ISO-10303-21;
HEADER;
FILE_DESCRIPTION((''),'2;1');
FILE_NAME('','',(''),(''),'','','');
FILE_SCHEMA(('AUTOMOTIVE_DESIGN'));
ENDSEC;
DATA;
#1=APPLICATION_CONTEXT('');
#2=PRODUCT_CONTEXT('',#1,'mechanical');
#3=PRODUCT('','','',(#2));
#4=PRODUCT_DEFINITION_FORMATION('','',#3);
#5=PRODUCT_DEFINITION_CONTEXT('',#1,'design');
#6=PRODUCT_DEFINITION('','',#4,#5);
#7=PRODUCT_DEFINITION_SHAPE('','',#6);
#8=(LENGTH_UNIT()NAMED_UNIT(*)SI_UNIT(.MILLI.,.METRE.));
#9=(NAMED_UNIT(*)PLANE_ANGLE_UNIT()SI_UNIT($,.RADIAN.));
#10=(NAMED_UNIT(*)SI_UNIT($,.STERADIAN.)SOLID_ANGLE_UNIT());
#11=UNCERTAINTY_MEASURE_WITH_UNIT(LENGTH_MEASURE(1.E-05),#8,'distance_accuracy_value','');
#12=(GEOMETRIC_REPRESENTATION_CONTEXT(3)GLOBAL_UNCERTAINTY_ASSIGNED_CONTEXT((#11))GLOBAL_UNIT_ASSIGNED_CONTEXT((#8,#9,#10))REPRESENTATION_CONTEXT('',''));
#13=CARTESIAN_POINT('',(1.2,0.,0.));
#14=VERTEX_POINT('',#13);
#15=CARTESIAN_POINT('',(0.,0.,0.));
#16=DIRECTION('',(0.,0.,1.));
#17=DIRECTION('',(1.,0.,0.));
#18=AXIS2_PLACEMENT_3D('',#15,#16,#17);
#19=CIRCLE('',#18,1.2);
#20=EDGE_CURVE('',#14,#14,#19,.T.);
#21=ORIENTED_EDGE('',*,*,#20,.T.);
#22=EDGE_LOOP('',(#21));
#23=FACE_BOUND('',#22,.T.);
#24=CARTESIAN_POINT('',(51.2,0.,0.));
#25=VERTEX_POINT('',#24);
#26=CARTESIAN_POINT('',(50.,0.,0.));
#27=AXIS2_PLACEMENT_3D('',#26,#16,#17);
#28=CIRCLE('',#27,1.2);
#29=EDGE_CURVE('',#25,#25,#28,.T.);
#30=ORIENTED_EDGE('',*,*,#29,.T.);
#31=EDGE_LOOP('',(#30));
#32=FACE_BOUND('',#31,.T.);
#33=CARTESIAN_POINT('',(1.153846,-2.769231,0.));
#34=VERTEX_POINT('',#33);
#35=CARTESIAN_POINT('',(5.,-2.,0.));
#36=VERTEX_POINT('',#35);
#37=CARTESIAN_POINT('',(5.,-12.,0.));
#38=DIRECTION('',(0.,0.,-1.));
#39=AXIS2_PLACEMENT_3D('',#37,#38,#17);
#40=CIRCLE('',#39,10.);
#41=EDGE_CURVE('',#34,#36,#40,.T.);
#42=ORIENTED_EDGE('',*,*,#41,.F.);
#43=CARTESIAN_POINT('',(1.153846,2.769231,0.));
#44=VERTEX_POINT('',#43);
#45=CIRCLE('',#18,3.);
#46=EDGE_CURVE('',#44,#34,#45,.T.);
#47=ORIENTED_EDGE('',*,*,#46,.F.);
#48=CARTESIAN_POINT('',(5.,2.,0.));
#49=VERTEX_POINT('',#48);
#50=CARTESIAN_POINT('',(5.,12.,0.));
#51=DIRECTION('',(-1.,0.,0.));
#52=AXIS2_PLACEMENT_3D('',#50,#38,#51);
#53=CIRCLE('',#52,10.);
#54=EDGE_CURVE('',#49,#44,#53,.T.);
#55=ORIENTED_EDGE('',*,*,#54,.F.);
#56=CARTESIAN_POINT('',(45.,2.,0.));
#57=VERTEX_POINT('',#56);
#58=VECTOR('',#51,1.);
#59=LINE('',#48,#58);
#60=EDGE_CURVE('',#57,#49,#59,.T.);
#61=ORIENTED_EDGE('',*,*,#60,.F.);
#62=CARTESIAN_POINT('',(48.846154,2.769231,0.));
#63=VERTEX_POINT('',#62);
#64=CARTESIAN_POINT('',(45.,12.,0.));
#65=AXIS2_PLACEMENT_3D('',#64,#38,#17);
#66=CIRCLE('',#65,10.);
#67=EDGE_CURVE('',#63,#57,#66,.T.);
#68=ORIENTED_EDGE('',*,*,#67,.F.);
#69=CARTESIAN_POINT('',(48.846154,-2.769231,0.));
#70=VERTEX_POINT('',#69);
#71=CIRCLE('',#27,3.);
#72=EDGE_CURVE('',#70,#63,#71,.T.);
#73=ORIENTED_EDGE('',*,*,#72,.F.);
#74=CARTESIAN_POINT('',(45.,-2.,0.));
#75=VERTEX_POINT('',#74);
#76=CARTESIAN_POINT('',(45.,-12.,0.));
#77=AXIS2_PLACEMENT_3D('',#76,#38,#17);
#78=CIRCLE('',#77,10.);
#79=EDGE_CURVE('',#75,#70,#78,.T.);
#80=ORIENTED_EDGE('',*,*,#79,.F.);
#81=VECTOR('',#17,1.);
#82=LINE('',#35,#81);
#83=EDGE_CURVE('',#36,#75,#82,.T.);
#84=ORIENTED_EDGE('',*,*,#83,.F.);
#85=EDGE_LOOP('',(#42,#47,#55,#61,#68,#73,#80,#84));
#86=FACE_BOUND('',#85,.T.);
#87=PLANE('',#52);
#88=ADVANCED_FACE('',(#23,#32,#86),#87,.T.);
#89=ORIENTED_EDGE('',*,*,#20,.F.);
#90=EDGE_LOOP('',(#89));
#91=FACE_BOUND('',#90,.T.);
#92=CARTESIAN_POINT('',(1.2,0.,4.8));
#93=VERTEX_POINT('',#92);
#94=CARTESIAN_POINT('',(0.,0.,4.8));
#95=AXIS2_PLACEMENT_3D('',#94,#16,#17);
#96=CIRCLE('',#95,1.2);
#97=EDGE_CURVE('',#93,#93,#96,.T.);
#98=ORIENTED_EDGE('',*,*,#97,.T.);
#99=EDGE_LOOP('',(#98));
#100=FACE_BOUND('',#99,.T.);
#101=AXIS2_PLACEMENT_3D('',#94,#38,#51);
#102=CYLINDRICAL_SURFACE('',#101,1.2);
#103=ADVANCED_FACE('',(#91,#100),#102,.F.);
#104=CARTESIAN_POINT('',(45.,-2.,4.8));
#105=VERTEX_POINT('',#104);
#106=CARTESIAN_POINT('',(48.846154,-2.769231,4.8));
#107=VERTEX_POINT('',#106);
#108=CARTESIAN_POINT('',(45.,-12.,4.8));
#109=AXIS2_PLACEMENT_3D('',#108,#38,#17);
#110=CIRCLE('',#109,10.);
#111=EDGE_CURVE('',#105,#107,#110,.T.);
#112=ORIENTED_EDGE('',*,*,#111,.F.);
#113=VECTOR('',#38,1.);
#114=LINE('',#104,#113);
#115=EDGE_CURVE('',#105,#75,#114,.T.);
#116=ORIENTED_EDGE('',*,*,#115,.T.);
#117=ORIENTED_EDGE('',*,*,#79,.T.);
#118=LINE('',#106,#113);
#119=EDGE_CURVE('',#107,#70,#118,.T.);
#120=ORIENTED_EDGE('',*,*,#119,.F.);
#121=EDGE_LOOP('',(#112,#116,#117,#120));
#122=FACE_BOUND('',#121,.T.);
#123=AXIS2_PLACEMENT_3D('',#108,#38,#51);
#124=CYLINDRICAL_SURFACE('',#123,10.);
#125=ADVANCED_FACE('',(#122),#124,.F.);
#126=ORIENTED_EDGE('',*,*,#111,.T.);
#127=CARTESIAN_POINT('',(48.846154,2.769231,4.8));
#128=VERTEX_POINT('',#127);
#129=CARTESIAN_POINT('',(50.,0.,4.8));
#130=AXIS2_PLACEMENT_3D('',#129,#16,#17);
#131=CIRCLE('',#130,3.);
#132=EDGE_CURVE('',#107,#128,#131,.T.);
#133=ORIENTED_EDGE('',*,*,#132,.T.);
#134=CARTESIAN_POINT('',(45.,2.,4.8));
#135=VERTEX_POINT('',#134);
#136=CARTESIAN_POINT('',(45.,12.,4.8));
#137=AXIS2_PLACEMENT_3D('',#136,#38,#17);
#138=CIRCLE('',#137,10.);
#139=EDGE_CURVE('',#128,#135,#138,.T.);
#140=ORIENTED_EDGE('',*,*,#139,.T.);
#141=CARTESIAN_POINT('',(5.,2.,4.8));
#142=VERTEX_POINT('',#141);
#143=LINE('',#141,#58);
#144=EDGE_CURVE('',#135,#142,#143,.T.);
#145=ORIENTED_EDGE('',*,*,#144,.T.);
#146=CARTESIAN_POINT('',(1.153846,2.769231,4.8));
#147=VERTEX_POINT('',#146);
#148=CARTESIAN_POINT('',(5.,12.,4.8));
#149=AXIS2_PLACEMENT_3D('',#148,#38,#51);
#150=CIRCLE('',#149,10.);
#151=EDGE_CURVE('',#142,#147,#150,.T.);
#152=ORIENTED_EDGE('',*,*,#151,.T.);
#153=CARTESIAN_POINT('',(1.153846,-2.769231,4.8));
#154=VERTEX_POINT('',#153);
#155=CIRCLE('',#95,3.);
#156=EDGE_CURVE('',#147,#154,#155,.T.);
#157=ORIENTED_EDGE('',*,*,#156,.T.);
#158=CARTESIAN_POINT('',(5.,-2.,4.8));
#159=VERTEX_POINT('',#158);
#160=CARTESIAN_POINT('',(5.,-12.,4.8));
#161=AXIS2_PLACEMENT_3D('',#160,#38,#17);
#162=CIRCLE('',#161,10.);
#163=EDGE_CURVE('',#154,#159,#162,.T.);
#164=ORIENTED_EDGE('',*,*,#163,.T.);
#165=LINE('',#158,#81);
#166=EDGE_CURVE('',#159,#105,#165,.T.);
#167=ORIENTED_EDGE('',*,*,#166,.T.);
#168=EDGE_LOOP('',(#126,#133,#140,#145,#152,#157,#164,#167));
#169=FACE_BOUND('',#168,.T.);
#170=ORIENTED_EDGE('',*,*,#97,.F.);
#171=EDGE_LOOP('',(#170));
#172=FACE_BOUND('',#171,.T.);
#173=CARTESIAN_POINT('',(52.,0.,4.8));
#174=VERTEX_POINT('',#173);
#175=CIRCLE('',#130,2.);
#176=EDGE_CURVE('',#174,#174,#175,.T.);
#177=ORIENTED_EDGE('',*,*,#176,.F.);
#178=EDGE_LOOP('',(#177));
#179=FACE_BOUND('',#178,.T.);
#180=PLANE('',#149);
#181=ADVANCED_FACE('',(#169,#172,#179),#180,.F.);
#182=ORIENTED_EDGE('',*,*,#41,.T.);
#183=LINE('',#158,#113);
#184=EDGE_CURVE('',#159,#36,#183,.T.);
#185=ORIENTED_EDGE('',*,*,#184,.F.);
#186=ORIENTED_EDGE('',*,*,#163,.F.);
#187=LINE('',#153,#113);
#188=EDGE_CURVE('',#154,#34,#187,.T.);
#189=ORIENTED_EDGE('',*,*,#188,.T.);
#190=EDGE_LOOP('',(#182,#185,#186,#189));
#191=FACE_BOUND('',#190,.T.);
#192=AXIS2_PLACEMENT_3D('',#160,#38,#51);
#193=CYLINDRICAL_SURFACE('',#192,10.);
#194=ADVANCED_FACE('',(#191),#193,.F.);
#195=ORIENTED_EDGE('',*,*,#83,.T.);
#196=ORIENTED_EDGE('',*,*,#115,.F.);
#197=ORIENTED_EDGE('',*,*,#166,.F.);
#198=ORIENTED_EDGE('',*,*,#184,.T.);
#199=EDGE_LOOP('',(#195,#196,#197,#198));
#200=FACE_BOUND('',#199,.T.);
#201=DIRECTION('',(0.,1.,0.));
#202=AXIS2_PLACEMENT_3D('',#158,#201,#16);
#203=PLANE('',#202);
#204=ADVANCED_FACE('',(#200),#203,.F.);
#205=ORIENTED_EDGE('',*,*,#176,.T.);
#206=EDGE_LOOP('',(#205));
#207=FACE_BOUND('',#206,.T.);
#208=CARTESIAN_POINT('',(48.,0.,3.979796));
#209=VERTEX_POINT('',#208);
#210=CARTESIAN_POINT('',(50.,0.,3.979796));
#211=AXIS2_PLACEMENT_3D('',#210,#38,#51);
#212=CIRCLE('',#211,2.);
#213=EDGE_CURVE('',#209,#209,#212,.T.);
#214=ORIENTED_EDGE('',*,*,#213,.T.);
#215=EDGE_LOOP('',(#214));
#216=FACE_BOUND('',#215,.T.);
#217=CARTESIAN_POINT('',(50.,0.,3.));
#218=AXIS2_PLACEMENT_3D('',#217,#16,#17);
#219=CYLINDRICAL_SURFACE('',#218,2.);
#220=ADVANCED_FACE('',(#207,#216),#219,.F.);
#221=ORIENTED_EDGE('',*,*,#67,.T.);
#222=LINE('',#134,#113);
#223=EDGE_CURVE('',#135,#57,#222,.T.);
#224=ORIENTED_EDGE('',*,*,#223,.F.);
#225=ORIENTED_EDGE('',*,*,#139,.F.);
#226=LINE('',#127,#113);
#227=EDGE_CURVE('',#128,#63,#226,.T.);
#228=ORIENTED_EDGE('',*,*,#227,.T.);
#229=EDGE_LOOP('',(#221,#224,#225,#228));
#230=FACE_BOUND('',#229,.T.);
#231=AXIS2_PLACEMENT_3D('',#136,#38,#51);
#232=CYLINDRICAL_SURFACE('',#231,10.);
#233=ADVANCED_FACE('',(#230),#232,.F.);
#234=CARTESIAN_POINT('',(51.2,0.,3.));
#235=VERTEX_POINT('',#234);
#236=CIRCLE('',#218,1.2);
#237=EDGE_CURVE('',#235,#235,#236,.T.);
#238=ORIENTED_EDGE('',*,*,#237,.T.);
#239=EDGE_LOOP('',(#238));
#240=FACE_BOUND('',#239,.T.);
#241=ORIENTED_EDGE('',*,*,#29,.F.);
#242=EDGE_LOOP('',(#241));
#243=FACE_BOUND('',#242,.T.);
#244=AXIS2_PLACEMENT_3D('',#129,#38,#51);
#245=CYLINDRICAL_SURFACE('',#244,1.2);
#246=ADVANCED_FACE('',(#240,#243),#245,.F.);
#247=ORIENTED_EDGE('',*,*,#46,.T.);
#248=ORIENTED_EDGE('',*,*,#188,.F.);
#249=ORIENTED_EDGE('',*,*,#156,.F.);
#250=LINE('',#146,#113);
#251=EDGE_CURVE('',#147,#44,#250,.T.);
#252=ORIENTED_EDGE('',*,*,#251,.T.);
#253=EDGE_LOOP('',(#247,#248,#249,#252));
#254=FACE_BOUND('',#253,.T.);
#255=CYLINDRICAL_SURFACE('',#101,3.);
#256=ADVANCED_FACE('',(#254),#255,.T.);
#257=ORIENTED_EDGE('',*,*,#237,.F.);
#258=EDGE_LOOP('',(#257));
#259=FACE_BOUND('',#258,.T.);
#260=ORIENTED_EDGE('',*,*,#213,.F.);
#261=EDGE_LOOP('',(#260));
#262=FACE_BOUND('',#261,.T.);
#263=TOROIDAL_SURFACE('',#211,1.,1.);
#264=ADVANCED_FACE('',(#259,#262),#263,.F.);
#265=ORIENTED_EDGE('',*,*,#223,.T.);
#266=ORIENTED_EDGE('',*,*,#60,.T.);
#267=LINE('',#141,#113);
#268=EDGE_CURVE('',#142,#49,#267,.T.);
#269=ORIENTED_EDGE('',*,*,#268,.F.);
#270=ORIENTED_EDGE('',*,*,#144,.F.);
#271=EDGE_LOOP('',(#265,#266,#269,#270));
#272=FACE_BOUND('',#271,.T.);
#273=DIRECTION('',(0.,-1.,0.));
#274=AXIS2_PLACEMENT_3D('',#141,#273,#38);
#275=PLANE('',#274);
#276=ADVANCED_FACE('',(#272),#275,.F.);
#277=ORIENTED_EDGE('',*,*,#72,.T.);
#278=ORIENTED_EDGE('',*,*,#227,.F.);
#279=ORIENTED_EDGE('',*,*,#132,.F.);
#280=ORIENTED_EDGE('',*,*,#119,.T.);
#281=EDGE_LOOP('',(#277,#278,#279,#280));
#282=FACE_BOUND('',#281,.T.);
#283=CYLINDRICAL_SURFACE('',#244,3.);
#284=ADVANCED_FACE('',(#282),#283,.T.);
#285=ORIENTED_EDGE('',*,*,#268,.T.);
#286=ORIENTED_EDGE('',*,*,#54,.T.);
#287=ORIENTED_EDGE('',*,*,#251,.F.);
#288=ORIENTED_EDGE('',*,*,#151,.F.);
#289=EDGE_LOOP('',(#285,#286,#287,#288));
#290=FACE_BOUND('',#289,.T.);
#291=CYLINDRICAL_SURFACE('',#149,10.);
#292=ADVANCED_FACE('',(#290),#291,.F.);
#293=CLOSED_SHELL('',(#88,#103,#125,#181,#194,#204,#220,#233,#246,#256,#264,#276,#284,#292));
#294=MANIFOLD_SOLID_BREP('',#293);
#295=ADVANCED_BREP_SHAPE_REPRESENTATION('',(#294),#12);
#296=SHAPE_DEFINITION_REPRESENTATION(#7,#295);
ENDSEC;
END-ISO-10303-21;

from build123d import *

# Parameters (mm, degrees)
SKETCH1_R           = 1.2
BOSS_EXTRUDE1_DEPTH = 4.8
SKETCH2_R           = 2
CUT_EXTRUDE1_DEPTH  = 1.8
FILLET1_R           = 1


with BuildPart() as part:
    # Sketch1 → Boss-Extrude1 (new body)
    with BuildSketch(Plane.XY):
        with BuildLine():
            Line((5, -2), (45, -2))
            ThreePointArc((45, -2), (46.961161351, -2.194193243), (48.846153846, -2.769230769))
            ThreePointArc((48.846153846, -2.769230769), (53, 0), (48.846153846, 2.769230769))
            ThreePointArc((48.846153846, 2.769230769), (46.961161351, 2.194193243), (45, 2))
            Line((45, 2), (5, 2))
            ThreePointArc((5, 2), (3.038838649, 2.194193243), (1.153846154, 2.769230769))
            ThreePointArc((1.153846154, 2.769230769), (-3, 0), (1.153846154, -2.769230769))
            ThreePointArc((1.153846154, -2.769230769), (3.038838649, -2.194193243), (5, -2))
        make_face()
        Circle(SKETCH1_R, mode=Mode.SUBTRACT)
        with Locations((50, 0)):
            Circle(SKETCH1_R, mode=Mode.SUBTRACT)
    extrude(amount=BOSS_EXTRUDE1_DEPTH)

    # Sketch2 → Cut-Extrude1 (cut)
    with BuildSketch(Plane.XY.offset(4.8)):
        with Locations((50, 0)):
            Circle(SKETCH2_R)
    extrude(amount=-CUT_EXTRUDE1_DEPTH, mode=Mode.SUBTRACT)

    # Fillet1
    # the kernel refuses this fillet: 1 mm, written as the material it adds along each edge
    with BuildSketch(Plane(origin=(50, 0, 3), x_dir=(1, 0, 0), z_dir=(0, -1, 0))) as fillet1_piece_1:
        with BuildLine():
            CenterArc((1, 0.979795897), FILLET1_R, 281.536959033, 78.463040967)
            Line((1.2, 0), (1.204, -0.019595918))
            ThreePointArc((1.204, -0.019595918), (1.6, -0.02), (2, -0.02))
            Line((2, -0.02), (2.02, 0))
            Line((2.02, 0), (2.02, 0.979795897))
            Line((2.02, 0.979795897), (2, 0.979795897))
        make_face()
    revolve(axis=Axis((50, 0, 3), (0, 0, 1)))


solid = part.part
